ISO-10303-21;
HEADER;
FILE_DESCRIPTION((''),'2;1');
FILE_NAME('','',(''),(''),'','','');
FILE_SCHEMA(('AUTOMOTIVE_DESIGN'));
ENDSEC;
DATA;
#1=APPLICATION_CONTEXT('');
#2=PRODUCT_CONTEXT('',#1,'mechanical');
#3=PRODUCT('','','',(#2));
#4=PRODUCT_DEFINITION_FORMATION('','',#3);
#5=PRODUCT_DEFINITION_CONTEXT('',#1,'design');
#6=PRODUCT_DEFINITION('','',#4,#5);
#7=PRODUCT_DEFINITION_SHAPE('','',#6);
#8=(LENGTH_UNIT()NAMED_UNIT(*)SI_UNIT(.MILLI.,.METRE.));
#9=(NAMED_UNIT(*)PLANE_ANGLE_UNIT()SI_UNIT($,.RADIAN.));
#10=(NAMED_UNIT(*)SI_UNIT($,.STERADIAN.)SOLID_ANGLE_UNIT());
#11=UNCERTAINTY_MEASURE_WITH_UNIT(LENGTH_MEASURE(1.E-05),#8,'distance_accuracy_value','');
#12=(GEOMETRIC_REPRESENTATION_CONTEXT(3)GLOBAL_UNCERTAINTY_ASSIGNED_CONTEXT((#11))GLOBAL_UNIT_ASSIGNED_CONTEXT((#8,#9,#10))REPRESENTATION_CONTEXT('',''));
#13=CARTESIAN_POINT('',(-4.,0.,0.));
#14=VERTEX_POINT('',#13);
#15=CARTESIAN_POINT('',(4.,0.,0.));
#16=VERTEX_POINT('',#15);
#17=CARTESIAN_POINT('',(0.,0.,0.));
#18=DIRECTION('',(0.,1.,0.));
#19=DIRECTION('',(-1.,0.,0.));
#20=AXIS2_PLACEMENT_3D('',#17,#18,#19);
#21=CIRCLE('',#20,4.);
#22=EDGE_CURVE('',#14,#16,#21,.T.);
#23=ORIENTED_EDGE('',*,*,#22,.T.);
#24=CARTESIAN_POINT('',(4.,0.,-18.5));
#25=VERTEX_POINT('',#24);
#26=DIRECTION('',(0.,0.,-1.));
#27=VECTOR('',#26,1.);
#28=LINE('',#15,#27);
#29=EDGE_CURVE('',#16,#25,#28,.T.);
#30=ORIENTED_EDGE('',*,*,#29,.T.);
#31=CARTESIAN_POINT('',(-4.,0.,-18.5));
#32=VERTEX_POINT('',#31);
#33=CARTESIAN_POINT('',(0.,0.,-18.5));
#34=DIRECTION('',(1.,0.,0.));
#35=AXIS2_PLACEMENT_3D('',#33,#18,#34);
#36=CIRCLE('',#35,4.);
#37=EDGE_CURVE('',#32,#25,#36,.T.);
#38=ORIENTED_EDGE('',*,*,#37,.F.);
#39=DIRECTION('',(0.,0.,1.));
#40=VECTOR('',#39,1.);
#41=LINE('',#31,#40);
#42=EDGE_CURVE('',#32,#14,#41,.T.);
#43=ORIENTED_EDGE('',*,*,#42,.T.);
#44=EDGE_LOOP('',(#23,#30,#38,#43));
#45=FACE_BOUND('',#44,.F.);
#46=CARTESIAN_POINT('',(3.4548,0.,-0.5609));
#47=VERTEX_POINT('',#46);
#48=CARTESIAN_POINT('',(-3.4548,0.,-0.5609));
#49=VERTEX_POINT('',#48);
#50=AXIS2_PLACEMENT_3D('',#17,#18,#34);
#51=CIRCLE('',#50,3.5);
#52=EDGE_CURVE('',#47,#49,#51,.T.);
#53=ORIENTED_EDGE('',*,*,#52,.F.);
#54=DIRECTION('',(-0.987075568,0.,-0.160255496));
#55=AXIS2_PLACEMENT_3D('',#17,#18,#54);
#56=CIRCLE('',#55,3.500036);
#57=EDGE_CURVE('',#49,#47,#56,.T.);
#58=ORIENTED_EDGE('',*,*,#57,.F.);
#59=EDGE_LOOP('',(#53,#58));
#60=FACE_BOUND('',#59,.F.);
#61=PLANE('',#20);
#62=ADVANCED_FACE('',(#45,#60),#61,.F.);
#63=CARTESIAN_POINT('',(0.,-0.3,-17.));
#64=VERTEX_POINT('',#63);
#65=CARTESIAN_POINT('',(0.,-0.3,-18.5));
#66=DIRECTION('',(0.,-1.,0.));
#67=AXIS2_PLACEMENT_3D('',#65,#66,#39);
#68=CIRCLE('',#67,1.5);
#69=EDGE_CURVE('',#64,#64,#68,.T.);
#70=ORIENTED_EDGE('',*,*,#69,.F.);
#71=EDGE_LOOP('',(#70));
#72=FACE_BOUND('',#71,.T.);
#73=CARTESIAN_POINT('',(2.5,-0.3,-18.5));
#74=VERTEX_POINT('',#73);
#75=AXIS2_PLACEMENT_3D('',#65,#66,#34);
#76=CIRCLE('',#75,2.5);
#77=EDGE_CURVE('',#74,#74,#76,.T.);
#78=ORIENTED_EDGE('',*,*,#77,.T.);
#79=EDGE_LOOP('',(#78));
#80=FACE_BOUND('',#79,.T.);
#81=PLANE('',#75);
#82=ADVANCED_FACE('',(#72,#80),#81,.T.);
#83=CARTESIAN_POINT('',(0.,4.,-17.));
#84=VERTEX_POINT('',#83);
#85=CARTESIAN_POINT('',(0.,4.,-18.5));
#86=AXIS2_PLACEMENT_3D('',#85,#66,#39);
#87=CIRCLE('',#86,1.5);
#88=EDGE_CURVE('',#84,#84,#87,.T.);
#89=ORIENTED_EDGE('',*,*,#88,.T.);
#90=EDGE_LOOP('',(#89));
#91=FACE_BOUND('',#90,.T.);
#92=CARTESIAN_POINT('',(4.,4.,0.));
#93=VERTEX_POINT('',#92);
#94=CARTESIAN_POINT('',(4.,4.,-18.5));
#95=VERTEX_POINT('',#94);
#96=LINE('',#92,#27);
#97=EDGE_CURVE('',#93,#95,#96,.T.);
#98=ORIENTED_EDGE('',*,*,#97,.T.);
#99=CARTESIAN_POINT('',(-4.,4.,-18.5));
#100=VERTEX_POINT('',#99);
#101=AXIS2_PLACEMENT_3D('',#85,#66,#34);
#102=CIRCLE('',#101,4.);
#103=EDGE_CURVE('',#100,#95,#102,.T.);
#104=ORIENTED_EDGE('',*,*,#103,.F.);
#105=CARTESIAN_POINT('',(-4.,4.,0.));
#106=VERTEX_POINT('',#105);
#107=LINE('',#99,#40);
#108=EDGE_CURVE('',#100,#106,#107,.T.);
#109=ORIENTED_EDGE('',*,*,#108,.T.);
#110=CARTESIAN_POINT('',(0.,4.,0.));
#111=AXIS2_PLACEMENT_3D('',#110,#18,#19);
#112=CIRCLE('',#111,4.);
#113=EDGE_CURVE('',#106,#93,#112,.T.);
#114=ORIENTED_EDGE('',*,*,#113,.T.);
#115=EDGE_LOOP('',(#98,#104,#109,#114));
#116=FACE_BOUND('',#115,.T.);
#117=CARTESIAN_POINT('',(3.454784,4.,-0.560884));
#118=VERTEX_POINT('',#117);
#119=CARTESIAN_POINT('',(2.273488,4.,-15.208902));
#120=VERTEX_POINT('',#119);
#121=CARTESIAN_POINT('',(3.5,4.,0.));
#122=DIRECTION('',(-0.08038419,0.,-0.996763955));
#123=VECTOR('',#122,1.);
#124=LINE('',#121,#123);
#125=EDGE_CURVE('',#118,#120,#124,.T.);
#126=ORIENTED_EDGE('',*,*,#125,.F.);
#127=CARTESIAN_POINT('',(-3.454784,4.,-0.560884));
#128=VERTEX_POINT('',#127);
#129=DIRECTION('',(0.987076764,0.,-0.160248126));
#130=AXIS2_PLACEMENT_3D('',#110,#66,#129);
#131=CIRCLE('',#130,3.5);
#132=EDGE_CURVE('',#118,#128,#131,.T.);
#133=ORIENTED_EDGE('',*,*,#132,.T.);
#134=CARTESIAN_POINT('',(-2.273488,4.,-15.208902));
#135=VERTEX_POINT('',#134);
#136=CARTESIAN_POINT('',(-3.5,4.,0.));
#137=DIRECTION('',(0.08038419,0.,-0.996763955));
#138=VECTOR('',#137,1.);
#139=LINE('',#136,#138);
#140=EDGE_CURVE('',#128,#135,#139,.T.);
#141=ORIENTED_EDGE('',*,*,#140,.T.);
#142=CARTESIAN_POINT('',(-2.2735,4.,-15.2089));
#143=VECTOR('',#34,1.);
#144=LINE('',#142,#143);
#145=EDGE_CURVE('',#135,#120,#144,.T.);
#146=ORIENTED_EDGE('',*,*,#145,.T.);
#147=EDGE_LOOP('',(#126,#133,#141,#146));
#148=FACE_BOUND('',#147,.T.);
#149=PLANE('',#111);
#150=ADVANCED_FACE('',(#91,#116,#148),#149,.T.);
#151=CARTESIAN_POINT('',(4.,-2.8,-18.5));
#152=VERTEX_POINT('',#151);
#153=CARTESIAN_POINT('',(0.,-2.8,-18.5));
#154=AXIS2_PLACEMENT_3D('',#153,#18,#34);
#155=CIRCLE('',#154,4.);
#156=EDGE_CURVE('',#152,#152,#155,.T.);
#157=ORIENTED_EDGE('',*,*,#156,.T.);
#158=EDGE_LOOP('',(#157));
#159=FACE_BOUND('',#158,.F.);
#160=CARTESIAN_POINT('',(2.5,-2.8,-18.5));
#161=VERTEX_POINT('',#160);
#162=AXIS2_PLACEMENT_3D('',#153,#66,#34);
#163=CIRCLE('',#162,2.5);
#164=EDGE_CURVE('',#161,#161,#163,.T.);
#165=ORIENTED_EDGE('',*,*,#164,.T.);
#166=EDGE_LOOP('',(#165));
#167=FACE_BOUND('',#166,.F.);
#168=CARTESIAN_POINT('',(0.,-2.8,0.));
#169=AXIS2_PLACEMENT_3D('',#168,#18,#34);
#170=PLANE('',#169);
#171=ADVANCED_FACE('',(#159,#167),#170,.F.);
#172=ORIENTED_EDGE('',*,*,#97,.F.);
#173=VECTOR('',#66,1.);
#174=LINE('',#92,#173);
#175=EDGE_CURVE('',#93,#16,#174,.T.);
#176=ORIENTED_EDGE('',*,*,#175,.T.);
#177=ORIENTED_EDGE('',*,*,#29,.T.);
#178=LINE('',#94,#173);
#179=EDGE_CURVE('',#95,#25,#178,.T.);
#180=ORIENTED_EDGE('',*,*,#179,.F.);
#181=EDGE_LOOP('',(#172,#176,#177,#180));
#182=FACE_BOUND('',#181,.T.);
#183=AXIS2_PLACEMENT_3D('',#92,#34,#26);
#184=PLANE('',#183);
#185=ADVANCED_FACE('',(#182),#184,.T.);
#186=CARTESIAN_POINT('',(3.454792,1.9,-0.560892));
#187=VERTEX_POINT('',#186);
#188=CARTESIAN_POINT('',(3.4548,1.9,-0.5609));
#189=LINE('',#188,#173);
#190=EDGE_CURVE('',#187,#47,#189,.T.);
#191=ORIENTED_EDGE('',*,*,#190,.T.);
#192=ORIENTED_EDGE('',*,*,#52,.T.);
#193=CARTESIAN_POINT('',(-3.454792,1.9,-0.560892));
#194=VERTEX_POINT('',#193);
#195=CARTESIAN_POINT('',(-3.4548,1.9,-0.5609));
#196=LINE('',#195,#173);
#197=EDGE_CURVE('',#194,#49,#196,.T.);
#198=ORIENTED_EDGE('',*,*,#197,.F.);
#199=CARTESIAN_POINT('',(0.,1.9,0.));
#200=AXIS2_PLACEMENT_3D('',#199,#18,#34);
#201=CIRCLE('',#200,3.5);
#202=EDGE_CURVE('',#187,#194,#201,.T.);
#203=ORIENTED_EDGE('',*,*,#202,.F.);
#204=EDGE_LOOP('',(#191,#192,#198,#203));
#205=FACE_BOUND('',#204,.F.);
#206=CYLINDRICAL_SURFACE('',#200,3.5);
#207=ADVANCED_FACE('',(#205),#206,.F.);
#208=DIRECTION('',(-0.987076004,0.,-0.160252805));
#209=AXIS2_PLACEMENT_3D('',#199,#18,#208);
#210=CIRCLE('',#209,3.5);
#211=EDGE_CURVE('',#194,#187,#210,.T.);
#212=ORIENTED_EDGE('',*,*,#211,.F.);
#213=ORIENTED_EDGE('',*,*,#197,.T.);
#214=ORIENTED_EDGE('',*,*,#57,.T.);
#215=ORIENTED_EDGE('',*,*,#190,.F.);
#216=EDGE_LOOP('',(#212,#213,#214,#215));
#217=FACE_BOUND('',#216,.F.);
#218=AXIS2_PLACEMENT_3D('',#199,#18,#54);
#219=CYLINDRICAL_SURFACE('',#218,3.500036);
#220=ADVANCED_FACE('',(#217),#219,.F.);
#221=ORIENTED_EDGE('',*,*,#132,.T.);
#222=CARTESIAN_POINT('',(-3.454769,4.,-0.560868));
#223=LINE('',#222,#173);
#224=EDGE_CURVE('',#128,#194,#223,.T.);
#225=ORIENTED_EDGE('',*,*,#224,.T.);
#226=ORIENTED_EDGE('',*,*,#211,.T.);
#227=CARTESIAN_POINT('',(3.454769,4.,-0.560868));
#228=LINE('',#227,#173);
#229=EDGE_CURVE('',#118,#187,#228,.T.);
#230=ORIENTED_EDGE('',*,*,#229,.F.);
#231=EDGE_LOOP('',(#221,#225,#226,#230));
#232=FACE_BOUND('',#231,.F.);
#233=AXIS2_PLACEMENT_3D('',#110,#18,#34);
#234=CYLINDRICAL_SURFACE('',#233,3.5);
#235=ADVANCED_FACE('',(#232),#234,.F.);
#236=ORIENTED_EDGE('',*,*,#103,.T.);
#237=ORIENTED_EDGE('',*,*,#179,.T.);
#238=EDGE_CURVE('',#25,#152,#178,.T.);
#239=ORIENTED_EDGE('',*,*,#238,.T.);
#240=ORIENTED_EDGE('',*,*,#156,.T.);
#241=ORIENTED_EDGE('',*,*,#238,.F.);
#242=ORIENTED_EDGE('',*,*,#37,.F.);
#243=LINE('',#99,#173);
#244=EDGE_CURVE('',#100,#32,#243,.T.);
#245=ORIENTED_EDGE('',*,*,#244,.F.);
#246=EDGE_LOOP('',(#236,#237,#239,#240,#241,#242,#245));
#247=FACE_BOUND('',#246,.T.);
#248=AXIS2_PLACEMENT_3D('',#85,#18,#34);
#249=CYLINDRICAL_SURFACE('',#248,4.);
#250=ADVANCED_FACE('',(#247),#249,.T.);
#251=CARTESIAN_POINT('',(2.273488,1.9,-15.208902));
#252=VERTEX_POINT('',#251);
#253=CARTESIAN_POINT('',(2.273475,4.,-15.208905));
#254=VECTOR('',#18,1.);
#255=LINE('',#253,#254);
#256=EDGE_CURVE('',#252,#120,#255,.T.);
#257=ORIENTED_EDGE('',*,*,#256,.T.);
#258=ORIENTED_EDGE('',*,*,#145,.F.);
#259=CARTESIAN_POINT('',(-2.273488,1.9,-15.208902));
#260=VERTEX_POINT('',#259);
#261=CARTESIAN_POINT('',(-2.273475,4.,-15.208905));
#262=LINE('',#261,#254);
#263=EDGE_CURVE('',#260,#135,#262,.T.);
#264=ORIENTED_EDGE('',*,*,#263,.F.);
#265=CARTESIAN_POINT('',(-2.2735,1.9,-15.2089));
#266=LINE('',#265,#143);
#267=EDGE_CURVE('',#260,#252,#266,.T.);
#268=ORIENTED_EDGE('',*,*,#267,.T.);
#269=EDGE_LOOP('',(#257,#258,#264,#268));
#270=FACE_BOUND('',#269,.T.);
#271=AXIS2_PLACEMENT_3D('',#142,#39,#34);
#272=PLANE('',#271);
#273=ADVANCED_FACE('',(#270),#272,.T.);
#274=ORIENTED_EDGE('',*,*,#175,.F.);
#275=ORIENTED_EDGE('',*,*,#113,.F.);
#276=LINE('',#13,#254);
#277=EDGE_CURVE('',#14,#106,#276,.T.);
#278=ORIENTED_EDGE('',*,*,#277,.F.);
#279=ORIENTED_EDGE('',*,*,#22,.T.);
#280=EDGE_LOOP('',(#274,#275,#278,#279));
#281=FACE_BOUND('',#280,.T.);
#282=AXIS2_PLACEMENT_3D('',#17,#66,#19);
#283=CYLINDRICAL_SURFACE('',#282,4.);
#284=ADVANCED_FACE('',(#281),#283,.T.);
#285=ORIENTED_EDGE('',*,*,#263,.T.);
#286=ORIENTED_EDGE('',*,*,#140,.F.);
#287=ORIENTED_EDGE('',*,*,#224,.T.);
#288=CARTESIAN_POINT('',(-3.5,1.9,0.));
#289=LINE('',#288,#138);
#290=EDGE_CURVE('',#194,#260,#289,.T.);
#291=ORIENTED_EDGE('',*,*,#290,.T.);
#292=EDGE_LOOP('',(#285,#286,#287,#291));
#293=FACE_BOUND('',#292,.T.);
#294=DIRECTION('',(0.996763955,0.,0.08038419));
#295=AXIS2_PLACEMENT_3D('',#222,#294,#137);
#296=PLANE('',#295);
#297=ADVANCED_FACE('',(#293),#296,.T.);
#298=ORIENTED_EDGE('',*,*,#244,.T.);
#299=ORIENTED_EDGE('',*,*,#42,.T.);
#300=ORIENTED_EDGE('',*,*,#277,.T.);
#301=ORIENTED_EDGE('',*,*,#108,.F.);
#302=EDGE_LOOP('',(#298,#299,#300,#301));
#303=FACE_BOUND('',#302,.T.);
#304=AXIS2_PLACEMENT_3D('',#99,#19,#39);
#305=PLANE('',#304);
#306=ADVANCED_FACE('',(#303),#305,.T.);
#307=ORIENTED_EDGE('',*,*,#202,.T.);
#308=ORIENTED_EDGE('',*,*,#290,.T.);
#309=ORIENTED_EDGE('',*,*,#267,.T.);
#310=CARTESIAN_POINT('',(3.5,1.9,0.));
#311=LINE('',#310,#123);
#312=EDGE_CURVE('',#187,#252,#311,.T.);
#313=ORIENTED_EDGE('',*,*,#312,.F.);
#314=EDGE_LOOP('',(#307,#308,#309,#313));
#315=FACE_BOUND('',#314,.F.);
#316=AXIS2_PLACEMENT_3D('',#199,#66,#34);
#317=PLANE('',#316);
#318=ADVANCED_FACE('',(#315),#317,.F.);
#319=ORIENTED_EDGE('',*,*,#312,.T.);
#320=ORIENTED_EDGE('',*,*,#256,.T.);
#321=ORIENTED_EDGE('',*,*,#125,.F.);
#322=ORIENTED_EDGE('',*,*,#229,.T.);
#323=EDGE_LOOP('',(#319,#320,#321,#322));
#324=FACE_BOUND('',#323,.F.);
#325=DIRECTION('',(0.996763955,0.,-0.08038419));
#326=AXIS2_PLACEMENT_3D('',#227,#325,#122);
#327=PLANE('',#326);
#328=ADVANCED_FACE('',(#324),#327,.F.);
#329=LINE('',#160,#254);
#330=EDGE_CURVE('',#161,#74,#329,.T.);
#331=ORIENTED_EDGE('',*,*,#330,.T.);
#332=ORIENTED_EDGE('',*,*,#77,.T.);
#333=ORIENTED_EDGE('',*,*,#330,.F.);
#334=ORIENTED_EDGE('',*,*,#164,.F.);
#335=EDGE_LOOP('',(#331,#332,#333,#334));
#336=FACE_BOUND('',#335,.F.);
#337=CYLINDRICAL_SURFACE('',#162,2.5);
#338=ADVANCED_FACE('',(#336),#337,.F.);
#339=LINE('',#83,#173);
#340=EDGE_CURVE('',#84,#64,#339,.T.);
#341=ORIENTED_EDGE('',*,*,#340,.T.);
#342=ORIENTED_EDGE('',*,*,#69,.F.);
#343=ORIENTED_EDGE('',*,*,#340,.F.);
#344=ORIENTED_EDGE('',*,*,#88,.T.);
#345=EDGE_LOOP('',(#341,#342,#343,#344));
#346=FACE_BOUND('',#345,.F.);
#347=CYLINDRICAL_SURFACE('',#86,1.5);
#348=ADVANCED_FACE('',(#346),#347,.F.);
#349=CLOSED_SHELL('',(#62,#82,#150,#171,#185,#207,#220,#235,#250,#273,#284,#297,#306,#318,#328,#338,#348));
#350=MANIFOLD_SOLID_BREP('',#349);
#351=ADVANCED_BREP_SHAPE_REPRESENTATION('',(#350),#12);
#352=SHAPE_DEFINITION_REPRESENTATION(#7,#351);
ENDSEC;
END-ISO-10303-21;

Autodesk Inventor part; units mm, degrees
ref_plane "YZ Plane" through (0, 0, 0) normal (1, 0, 0) x (0, 1, 0)
ref_plane "XZ Plane" through (0, 0, 0) normal (0, 1, 0) x (-1, 0, 0)
ref_plane "XY Plane" through (0, 0, 0) normal (0, 0, 1) x (1, 0, 0)
sketch "Эскиз1" plane through (0, 0, 0) normal (0, 1, 0) x (-1, 0, 0)
  circle A0 centre (0, 0) radius 4
  dimension "d0" = 8
extrude "Выдавливание1" add sketch "Эскиз1" along normal blind 4
sketch "Эскиз5" plane through (0, 4, 0) normal (0, 1, 0) x (1, 0, 0)
  circle A0 centre (0, 0) radius 4 projected
  line L0 (-4, 0) -> (4, 0)
  line L1 (4, 0) -> (4, 18.5)
  line L2 (4, 18.5) -> (-4, 18.5)
  line L3 (-4, 18.5) -> (-4, 0)
  circle A1 centre (0, 0) radius 4 projected
  point P0 (4, 0)
  dimension "d27" = 18.5
extrude "Выдавливание4" add sketch "Эскиз5" against normal blind 4 contours A0 L3 L2 L1
sketch "Эскиз9" plane through (0, 4, 0) normal (0, -1, 0) x (1, 0, 0)
  circle A0 centre (0, 0) radius 3.5
  line L0 (3.5, 0) -> (-3.5, 0)
  line L1 (3.5, 0) -> (2.25, -15.5)
  line L2 (-3.5, 0) -> (-2.25, -15.5)
  line L3 (2.25, -15.5) -> (-2.25, -15.5)
  point P0 (0, -15.5)
  point P1 (-3.4548, -0.5609)
  point P2 (3.4548, -0.5609)
  dimension "d43" = 7
  dimension "d44" = 4.5
  dimension "d45" = 15.5
extrude "Выдавливание7" cut sketch "Эскиз9" along normal blind 2.1
sketch "Эскиз10" plane through (0, 1.9, 0) normal (0, 1, 0) x (1, 0, 0)
  line L0 (2.25, 15.5) -> (3.4548, 0.5609) projected
  line L1 (-2.25, 15.5) -> (2.25, 15.5) projected
  line L2 (-3.4548, 0.5609) -> (-2.25, 15.5) projected
  arc A0 (-3.4548, 0.5609) -> (3.4548, 0.5609) centre (0, 0) ccw projected
  arc A1 (-3.4548, 0.5609) -> (3.4548, 0.5609) centre (0, 0) ccw projected
  circle A2 centre (0, 0) radius 3.5
  point P0 (3.4548, 0.5609)
extrude "Выдавливание8" cut sketch "Эскиз10" against normal through all contours A0 A2
sketch "Эскиз6" plane through (0, 4, 0) normal (0, 1, 0) x (1, 0, 0)
  line L0 (-4, 18.5) -> (4, 18.5) projected
  circle A0 centre (0, 18.5) radius 4
  point P0 (0, 0)
  dimension "d30" = 8
extrude "Выдавливание5" add sketch "Эскиз6" against normal blind 6.8
sketch "Эскиз7" plane through (0, -2.8, -18.5) normal (0, -1, 0) x (1, 0, 0)
  arc A0 (-4, 0) -> (4, 0) centre (0, 0) ccw projected
  arc A1 (4, 0) -> (-4, 0) centre (0, 0) ccw projected
  circle A2 centre (0, 0) radius 2.5
  point P0 (0, 18.5)
  point P1 (3.35, -2.1857)
  point P2 (-3.35, -2.1857)
  dimension "d33" = 5
extrude "Выдавливание6" cut sketch "Эскиз7" against normal blind 2.5 contours A2
sketch "Эскиз8" plane through (0, 4, 0) normal (0, 1, 0) x (1, 0, 0)
  circle A0 centre (0, 18.5) radius 2.5 projected
  point P0 (0, 0)
hole "Отверстие2" at (0, 4, -18.5) direction (0, -1, 0) diameter 3 end through all
sketch "Эскиз11" plane through (0, 4, 0) normal (0, 1, 0) x (1, 0, 0)
  line L0 (-3.4548, 0.5609) -> (-2.2735, 15.2089) projected
  line L1 (2.2735, 15.2089) -> (3.4548, 0.5609) projected
  line L2 (-2.2735, 15.2089) -> (2.2735, 15.2089)
  arc A0 (-2.2735, 15.2089) -> (2.2735, 15.2089) centre (0, 18.5) ccw projected
  line L3 (-3.4548, 0.5609) -> (-2.2735, 15.2089) projected
  arc A1 (3.4548, 0.5609) -> (-3.4548, 0.5609) centre (0, 0) ccw projected
  line L4 (2.2735, 15.2089) -> (3.4548, 0.5609) projected
extrude "Выдавливание9" cut sketch "Эскиз11" against normal up to surface (2.1 mm away)
properties part number "Поворотный рычаг для сервы"
